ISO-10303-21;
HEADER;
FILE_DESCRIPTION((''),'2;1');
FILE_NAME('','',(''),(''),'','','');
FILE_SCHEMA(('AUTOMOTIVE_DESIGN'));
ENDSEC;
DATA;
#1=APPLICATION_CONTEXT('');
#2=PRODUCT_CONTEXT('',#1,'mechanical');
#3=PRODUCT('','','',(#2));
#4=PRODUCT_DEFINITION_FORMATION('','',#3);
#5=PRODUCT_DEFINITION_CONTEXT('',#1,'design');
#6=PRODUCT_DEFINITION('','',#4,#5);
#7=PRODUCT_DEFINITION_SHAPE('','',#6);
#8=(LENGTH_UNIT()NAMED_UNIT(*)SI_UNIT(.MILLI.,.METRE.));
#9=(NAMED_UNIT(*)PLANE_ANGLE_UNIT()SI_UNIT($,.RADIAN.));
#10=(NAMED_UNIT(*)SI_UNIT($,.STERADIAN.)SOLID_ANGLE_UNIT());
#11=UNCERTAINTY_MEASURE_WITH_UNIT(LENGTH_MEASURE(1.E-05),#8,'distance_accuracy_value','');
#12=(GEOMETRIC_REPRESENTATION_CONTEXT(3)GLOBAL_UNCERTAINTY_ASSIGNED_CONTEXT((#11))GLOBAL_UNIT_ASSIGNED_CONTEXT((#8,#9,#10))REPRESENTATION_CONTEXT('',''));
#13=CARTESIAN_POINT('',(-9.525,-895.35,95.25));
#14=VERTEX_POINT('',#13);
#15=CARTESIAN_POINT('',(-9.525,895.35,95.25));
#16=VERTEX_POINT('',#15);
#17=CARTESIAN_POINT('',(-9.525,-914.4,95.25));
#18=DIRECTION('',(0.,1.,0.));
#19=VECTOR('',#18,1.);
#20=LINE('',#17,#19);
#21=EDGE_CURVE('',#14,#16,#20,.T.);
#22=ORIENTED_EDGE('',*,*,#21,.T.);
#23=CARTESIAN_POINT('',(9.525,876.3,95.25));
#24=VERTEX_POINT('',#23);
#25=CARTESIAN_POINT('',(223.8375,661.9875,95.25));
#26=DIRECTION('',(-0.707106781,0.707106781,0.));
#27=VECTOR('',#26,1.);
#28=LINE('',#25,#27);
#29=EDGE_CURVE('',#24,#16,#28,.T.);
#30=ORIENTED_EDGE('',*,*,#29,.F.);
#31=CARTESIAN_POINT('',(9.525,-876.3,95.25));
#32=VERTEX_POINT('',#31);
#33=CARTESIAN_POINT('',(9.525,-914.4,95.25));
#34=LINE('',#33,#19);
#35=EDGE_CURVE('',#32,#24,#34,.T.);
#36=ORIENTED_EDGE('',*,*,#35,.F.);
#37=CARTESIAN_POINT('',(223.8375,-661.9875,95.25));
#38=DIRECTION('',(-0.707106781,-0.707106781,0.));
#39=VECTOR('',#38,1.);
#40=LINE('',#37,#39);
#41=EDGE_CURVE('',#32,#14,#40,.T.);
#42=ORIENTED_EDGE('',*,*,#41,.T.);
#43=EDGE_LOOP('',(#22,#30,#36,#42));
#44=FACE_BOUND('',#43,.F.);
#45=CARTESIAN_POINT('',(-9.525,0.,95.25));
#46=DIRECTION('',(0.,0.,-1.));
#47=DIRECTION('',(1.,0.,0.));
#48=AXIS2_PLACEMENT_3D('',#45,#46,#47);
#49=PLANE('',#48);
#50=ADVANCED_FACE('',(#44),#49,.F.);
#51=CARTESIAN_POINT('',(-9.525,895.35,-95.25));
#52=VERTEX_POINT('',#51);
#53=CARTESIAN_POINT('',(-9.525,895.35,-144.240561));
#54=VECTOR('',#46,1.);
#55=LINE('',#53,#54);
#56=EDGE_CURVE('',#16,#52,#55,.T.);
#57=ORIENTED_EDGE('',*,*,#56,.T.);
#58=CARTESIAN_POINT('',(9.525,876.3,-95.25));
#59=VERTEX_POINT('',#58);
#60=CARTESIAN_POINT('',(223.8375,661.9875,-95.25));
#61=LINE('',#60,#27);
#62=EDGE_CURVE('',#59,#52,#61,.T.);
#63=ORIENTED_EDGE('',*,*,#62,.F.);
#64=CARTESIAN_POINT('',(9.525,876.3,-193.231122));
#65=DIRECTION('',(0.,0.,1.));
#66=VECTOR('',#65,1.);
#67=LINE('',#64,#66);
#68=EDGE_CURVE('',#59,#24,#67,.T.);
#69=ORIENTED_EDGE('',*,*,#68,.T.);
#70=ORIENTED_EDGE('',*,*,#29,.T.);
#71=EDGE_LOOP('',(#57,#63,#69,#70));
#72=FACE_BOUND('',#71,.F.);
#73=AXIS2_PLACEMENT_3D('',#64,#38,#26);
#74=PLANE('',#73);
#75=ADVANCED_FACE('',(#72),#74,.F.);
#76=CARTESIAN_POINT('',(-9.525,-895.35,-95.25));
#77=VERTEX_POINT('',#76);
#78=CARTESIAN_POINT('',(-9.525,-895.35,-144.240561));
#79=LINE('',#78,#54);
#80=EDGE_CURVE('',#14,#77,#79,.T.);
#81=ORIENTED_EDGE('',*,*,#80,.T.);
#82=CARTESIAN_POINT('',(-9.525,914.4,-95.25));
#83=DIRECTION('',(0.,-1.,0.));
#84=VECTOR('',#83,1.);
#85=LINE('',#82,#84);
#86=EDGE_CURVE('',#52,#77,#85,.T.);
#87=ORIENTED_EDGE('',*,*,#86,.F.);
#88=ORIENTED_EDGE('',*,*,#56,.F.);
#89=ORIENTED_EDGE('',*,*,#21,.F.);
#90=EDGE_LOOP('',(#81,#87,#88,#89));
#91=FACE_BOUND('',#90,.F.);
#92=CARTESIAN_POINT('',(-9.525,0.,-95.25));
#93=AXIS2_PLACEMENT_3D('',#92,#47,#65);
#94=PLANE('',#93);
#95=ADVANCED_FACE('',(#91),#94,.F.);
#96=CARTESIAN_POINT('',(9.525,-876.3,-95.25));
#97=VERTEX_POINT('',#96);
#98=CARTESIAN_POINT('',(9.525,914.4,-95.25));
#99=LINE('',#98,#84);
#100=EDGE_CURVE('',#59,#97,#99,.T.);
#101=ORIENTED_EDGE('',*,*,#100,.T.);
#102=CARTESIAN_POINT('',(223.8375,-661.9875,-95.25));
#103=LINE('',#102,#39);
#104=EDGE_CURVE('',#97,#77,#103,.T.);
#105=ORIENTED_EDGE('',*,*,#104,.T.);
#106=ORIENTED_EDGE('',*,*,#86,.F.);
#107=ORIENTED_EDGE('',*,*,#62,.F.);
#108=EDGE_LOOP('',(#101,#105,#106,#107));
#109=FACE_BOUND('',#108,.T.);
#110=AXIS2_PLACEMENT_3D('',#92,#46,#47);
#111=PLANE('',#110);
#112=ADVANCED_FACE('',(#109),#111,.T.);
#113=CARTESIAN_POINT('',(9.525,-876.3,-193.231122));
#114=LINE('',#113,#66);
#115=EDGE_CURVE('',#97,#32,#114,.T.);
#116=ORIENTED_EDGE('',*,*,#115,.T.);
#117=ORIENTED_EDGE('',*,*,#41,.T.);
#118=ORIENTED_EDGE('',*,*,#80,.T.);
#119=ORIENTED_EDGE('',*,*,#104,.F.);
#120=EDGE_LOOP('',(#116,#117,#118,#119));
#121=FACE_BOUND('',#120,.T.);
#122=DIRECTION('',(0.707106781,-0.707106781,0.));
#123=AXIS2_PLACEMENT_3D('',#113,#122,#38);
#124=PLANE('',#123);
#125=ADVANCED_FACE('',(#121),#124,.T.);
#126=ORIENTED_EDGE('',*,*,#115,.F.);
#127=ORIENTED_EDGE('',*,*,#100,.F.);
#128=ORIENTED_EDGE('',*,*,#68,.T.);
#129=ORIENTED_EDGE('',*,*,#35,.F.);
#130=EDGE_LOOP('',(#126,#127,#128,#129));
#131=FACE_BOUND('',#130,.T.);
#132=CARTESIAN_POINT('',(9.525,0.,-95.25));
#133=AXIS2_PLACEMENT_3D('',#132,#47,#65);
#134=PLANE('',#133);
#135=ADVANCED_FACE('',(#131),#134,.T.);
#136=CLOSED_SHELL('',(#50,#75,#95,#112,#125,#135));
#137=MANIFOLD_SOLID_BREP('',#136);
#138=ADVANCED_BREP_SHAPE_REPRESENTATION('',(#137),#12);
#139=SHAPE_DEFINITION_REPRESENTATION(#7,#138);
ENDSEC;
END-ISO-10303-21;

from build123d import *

# Parameters (mm, degrees)
F0_W        = 19.05
F0_H        = 190.5
F1_DEPTH    = 914.4
F2_T1_DEPTH = 386.462243683


# Not quite as in the source:
# - a fillet or chamfer that OpenCascade refuses, or shapes differently, is made with other operations: its cross-section is extruded or revolved along the edge and cut away or added


with BuildPart() as f1:
    # F0 (on Front) → F1 (new body, symmetric)
    with BuildSketch(Plane.XZ):
        Rectangle(F0_W, F0_H)
    extrude(amount=F1_DEPTH, both=True)

    # F2: chamfer of 38.1 on 2 edges, made by hand

    # F2_s2 → F2_t1 (cut)
    with BuildSketch(Plane.XY.offset(-193.2311218415)):
        Polygon((9.525, -876.3), (-28.575, -914.4), (9.525, -914.4), align=None)
        Polygon((9.525, 876.3), (-28.575, 914.4), (9.525, 914.4), align=None)
    extrude(amount=F2_T1_DEPTH, mode=Mode.SUBTRACT)


solid = f1.part
